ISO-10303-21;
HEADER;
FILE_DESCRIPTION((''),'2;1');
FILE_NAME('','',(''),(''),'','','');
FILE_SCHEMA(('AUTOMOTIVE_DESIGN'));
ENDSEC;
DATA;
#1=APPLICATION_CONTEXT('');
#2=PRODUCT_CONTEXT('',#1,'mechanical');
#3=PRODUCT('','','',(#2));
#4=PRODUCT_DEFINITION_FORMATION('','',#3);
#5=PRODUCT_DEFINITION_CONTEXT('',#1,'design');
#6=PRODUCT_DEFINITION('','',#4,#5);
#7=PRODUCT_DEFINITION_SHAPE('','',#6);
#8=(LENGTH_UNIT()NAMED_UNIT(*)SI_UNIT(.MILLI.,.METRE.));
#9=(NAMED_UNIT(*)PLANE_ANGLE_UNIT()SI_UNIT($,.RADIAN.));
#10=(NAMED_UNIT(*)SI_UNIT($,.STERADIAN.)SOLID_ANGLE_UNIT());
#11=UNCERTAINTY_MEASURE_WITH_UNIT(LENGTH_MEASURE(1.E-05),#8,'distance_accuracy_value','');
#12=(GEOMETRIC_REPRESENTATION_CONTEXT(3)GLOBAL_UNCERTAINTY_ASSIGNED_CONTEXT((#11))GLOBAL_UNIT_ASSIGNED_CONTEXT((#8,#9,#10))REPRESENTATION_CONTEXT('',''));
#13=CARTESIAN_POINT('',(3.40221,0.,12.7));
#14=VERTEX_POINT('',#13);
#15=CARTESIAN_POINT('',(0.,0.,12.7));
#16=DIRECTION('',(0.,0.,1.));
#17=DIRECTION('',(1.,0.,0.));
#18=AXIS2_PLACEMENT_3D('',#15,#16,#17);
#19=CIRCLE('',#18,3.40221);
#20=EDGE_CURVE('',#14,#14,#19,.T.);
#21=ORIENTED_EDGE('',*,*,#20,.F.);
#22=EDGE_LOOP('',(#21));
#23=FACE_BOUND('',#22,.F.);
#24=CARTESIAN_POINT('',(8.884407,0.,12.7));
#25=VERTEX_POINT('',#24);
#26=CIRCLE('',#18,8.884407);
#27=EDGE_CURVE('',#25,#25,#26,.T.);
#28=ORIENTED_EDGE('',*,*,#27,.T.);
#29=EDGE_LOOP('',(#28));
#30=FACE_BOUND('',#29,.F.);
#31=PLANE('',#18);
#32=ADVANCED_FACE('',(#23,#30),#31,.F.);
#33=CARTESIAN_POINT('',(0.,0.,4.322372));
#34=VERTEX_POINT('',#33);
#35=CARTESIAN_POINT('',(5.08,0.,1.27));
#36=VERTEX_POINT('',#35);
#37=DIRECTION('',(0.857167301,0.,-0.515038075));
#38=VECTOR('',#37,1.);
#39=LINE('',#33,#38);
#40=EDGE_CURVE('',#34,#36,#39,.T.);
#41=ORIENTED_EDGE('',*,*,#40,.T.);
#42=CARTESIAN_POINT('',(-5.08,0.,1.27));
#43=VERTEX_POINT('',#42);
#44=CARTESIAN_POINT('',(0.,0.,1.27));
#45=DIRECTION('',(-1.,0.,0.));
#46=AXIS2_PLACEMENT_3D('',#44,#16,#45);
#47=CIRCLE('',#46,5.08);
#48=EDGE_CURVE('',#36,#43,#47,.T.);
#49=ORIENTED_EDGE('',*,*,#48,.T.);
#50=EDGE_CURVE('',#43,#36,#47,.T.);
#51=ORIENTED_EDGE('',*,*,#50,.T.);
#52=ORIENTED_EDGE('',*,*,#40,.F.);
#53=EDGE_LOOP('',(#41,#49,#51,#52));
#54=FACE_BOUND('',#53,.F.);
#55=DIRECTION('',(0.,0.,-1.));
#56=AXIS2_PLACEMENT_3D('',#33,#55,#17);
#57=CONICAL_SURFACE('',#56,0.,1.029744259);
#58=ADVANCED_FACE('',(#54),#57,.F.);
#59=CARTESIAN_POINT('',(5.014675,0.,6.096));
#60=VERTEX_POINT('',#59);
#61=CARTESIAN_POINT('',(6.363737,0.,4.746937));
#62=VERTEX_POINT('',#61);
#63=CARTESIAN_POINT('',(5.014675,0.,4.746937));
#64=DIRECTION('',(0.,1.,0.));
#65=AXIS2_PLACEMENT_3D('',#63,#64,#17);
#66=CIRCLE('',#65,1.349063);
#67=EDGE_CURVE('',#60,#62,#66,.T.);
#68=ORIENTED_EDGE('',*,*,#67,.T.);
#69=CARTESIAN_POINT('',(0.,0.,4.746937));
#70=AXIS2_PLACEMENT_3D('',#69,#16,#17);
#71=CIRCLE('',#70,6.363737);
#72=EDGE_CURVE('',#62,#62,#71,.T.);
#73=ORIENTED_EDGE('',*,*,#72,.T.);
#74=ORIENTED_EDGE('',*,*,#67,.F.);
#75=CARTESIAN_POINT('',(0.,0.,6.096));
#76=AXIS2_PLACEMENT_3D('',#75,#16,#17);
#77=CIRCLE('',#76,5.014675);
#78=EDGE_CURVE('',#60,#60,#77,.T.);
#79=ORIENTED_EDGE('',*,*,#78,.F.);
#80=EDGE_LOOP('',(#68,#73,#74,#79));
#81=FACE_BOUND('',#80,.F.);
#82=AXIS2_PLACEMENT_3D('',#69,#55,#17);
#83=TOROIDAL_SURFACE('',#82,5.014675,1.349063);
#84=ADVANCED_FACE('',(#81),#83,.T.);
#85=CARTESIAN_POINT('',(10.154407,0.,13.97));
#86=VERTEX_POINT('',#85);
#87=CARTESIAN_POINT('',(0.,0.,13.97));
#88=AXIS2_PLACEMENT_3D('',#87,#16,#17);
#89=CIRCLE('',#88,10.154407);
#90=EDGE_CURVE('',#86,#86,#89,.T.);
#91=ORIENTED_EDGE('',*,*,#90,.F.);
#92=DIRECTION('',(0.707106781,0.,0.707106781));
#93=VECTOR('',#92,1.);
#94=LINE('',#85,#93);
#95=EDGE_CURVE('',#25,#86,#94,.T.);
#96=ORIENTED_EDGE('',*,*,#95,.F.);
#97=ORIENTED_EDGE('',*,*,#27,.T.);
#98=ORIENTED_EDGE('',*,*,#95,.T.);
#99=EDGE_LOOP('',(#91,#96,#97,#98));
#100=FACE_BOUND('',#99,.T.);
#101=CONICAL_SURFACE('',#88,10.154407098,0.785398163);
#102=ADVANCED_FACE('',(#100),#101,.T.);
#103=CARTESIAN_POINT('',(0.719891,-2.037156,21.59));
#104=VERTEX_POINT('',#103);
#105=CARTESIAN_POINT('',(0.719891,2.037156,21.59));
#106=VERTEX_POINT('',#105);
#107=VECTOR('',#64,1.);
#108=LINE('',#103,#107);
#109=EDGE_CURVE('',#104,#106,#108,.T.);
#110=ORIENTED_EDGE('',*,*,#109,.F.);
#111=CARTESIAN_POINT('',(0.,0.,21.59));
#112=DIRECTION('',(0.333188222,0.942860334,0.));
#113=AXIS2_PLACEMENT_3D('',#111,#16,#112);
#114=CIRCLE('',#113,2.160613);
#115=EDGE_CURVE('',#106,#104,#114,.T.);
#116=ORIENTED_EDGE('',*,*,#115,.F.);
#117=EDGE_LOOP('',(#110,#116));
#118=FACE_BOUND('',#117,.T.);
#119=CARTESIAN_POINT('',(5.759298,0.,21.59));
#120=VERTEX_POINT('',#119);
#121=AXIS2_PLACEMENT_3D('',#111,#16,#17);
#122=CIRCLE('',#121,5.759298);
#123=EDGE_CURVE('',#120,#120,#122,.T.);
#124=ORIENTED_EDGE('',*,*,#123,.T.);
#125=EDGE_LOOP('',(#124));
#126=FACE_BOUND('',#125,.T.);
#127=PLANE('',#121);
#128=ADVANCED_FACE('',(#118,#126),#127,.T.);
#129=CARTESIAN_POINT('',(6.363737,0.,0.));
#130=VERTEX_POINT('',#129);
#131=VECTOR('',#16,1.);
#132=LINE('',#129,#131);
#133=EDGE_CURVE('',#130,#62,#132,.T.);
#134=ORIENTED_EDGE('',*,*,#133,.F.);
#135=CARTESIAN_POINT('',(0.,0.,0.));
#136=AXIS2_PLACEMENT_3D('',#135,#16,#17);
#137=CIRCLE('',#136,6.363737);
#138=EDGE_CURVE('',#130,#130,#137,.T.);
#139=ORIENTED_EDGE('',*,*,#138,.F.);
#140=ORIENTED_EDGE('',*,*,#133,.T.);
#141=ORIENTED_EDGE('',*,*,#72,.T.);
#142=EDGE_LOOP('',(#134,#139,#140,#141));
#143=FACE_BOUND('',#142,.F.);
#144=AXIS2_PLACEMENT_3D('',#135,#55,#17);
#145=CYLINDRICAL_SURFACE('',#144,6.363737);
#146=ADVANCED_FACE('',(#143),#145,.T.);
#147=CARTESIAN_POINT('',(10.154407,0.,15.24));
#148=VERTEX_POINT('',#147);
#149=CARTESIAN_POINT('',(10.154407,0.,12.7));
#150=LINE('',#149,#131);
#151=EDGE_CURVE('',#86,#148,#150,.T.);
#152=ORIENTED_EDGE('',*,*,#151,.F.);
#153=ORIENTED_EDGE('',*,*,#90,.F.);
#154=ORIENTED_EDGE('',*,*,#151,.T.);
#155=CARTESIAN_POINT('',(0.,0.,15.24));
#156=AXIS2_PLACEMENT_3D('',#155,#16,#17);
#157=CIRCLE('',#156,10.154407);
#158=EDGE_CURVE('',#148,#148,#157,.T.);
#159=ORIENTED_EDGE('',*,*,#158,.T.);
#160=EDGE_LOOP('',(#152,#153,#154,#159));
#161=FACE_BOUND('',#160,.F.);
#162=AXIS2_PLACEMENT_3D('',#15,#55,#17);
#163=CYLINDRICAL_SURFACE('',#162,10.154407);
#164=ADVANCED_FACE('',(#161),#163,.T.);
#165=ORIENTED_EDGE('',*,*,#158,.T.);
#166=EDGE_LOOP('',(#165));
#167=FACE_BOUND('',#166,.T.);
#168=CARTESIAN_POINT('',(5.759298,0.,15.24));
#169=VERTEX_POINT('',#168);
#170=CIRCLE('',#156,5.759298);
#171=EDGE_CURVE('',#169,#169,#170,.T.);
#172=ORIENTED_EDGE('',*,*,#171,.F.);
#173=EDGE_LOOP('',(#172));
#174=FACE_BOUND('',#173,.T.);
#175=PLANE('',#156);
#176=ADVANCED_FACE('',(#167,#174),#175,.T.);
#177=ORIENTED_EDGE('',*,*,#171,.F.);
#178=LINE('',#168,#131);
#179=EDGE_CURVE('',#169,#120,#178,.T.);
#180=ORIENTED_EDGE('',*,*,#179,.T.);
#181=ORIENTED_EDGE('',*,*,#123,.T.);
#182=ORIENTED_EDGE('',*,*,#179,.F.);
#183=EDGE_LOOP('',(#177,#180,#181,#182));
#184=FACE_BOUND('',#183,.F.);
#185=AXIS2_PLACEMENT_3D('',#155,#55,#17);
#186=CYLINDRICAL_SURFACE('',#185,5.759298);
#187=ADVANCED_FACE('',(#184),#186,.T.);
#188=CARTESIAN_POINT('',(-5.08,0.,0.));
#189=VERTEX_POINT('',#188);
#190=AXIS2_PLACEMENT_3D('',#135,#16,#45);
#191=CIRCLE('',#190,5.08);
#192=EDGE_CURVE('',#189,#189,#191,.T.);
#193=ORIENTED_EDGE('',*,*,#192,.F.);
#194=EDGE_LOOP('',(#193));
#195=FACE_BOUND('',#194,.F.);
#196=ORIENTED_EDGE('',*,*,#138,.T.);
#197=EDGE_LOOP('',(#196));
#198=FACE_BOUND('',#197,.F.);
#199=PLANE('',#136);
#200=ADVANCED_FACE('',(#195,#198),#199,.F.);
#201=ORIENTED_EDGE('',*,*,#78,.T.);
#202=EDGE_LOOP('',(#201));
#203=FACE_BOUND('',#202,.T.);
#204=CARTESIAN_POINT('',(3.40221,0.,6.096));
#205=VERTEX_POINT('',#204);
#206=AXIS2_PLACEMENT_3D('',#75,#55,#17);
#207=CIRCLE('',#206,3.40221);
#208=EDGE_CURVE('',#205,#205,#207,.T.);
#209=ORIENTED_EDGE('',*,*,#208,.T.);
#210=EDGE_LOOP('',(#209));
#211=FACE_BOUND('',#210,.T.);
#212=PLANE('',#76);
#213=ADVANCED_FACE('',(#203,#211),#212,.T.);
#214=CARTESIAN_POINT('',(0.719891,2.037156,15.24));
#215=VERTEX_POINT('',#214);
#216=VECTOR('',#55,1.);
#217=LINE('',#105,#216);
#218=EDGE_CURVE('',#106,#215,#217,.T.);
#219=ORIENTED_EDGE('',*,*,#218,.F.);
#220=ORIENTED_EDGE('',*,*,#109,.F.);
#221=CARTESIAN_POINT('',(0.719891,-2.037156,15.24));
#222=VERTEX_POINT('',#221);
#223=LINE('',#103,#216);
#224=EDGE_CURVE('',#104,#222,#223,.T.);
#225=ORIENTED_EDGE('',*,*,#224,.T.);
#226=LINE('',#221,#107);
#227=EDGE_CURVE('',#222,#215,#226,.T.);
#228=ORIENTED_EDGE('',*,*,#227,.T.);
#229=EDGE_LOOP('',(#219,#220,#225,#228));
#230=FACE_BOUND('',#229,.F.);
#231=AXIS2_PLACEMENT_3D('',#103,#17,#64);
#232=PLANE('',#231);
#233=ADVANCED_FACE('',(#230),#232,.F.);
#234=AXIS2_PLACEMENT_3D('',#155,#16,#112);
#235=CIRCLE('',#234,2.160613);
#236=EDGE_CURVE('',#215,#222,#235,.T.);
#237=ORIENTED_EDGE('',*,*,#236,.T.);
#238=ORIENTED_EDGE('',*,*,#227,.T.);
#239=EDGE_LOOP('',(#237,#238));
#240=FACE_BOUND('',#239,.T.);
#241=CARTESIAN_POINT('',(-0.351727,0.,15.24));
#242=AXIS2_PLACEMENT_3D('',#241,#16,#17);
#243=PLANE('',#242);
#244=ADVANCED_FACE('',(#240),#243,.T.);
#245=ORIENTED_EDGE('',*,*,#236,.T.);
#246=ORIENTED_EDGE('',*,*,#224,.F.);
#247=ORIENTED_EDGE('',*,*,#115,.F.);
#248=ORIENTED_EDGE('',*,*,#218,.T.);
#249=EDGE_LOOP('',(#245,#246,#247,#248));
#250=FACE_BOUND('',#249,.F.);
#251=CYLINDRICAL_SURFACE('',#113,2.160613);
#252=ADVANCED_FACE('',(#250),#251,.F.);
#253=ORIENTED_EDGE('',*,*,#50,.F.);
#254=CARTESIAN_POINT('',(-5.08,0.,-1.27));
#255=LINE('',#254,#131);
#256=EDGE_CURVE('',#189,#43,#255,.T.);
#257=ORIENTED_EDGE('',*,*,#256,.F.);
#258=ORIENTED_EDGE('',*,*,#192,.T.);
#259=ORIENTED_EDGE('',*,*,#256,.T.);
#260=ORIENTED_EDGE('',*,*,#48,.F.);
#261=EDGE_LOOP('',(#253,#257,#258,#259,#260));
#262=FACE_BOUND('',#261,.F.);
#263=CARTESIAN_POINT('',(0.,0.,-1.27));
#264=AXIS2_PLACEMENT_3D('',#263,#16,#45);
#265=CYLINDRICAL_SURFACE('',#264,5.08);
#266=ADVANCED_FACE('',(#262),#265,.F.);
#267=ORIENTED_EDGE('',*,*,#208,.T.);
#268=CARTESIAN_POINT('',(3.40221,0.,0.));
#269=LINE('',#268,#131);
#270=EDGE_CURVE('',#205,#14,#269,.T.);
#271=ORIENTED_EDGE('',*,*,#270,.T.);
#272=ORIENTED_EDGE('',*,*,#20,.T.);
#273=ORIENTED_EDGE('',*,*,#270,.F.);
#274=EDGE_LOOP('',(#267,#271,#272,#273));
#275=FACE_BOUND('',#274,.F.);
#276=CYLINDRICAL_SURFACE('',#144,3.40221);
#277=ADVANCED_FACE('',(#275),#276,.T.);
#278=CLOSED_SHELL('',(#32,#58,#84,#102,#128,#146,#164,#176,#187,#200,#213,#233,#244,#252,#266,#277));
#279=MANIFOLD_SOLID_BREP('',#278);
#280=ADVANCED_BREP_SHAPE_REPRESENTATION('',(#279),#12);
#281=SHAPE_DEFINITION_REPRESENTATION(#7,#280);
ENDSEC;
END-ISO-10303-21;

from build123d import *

# Parameters (mm, degrees)
F0_R      = 6.3637373436
F1_DEPTH  = 6.096
F2_R      = 3.4022099148
F3_DEPTH  = 12.7
F5_R      = 10.1544070979
F6_DEPTH  = 2.54
F8_R      = 5.7592976
F9_DEPTH  = 6.35
F12_DEPTH = 6.35
F13_D     = 10.16
F13_DEPTH = 1.27
F13_TIP   = 3.0523719447
F14_R     = 1.3490625387
F15_SIZE  = 1.27


with BuildPart() as f1:
    # F0 (on Top) → F1 (new body)
    with BuildSketch(Plane.XY):
        Circle(F0_R)
    extrude(amount=F1_DEPTH)

    # F2 (on Top) → F3 (join)
    with BuildSketch(Plane.XY):
        Circle(F2_R)
    extrude(amount=F3_DEPTH)

    # F5 (on offset) → F6 (join)
    with BuildSketch(Plane.XY.offset(12.7)):
        Circle(F5_R)
    extrude(amount=F6_DEPTH)

    # F8 (on offset) → F9 (join)
    with BuildSketch(Plane.XY.offset(15.24)):
        Circle(F8_R)
    extrude(amount=F9_DEPTH)

    # F11 (on offset) → F12 (cut)
    with BuildSketch(Plane.XY.offset(21.59)):
        with BuildLine():
            Line((0.7198907698, 0), (0.7198907698, 2.0371562))
            ThreePointArc((0.7198907698, 2.0371562), (-2.1606129, 0), (0.7198907698, -2.0371562))
            Line((0.7198907698, -2.0371562), (0.7198907698, 0))
        make_face()
    extrude(amount=-F12_DEPTH, mode=Mode.SUBTRACT)

    # F13
    with Locations(Plane(origin=(0, 0, 0), x_dir=(1, 0, 0), z_dir=(0, 0, -1))):
        with Locations((0, 0)):
            Hole(F13_D / 2, depth=F13_DEPTH)
            with Locations((0, 0, -(F13_DEPTH + F13_TIP / 2))):  # 118° drill point
                Cone(0, F13_D / 2, F13_TIP, mode=Mode.SUBTRACT)

    # F14
    f14_edges = [f1.edges().sort_by_distance(p)[0] for p in [
        (-6.363737, 0, 6.096),
    ]]
    fillet(f14_edges, radius=F14_R)

    # F15
    f15_edges = [f1.edges().sort_by_distance(p)[0] for p in [
        (-10.154407, 0, 12.7),
    ]]
    chamfer(f15_edges, length=F15_SIZE)


solid = f1.part
